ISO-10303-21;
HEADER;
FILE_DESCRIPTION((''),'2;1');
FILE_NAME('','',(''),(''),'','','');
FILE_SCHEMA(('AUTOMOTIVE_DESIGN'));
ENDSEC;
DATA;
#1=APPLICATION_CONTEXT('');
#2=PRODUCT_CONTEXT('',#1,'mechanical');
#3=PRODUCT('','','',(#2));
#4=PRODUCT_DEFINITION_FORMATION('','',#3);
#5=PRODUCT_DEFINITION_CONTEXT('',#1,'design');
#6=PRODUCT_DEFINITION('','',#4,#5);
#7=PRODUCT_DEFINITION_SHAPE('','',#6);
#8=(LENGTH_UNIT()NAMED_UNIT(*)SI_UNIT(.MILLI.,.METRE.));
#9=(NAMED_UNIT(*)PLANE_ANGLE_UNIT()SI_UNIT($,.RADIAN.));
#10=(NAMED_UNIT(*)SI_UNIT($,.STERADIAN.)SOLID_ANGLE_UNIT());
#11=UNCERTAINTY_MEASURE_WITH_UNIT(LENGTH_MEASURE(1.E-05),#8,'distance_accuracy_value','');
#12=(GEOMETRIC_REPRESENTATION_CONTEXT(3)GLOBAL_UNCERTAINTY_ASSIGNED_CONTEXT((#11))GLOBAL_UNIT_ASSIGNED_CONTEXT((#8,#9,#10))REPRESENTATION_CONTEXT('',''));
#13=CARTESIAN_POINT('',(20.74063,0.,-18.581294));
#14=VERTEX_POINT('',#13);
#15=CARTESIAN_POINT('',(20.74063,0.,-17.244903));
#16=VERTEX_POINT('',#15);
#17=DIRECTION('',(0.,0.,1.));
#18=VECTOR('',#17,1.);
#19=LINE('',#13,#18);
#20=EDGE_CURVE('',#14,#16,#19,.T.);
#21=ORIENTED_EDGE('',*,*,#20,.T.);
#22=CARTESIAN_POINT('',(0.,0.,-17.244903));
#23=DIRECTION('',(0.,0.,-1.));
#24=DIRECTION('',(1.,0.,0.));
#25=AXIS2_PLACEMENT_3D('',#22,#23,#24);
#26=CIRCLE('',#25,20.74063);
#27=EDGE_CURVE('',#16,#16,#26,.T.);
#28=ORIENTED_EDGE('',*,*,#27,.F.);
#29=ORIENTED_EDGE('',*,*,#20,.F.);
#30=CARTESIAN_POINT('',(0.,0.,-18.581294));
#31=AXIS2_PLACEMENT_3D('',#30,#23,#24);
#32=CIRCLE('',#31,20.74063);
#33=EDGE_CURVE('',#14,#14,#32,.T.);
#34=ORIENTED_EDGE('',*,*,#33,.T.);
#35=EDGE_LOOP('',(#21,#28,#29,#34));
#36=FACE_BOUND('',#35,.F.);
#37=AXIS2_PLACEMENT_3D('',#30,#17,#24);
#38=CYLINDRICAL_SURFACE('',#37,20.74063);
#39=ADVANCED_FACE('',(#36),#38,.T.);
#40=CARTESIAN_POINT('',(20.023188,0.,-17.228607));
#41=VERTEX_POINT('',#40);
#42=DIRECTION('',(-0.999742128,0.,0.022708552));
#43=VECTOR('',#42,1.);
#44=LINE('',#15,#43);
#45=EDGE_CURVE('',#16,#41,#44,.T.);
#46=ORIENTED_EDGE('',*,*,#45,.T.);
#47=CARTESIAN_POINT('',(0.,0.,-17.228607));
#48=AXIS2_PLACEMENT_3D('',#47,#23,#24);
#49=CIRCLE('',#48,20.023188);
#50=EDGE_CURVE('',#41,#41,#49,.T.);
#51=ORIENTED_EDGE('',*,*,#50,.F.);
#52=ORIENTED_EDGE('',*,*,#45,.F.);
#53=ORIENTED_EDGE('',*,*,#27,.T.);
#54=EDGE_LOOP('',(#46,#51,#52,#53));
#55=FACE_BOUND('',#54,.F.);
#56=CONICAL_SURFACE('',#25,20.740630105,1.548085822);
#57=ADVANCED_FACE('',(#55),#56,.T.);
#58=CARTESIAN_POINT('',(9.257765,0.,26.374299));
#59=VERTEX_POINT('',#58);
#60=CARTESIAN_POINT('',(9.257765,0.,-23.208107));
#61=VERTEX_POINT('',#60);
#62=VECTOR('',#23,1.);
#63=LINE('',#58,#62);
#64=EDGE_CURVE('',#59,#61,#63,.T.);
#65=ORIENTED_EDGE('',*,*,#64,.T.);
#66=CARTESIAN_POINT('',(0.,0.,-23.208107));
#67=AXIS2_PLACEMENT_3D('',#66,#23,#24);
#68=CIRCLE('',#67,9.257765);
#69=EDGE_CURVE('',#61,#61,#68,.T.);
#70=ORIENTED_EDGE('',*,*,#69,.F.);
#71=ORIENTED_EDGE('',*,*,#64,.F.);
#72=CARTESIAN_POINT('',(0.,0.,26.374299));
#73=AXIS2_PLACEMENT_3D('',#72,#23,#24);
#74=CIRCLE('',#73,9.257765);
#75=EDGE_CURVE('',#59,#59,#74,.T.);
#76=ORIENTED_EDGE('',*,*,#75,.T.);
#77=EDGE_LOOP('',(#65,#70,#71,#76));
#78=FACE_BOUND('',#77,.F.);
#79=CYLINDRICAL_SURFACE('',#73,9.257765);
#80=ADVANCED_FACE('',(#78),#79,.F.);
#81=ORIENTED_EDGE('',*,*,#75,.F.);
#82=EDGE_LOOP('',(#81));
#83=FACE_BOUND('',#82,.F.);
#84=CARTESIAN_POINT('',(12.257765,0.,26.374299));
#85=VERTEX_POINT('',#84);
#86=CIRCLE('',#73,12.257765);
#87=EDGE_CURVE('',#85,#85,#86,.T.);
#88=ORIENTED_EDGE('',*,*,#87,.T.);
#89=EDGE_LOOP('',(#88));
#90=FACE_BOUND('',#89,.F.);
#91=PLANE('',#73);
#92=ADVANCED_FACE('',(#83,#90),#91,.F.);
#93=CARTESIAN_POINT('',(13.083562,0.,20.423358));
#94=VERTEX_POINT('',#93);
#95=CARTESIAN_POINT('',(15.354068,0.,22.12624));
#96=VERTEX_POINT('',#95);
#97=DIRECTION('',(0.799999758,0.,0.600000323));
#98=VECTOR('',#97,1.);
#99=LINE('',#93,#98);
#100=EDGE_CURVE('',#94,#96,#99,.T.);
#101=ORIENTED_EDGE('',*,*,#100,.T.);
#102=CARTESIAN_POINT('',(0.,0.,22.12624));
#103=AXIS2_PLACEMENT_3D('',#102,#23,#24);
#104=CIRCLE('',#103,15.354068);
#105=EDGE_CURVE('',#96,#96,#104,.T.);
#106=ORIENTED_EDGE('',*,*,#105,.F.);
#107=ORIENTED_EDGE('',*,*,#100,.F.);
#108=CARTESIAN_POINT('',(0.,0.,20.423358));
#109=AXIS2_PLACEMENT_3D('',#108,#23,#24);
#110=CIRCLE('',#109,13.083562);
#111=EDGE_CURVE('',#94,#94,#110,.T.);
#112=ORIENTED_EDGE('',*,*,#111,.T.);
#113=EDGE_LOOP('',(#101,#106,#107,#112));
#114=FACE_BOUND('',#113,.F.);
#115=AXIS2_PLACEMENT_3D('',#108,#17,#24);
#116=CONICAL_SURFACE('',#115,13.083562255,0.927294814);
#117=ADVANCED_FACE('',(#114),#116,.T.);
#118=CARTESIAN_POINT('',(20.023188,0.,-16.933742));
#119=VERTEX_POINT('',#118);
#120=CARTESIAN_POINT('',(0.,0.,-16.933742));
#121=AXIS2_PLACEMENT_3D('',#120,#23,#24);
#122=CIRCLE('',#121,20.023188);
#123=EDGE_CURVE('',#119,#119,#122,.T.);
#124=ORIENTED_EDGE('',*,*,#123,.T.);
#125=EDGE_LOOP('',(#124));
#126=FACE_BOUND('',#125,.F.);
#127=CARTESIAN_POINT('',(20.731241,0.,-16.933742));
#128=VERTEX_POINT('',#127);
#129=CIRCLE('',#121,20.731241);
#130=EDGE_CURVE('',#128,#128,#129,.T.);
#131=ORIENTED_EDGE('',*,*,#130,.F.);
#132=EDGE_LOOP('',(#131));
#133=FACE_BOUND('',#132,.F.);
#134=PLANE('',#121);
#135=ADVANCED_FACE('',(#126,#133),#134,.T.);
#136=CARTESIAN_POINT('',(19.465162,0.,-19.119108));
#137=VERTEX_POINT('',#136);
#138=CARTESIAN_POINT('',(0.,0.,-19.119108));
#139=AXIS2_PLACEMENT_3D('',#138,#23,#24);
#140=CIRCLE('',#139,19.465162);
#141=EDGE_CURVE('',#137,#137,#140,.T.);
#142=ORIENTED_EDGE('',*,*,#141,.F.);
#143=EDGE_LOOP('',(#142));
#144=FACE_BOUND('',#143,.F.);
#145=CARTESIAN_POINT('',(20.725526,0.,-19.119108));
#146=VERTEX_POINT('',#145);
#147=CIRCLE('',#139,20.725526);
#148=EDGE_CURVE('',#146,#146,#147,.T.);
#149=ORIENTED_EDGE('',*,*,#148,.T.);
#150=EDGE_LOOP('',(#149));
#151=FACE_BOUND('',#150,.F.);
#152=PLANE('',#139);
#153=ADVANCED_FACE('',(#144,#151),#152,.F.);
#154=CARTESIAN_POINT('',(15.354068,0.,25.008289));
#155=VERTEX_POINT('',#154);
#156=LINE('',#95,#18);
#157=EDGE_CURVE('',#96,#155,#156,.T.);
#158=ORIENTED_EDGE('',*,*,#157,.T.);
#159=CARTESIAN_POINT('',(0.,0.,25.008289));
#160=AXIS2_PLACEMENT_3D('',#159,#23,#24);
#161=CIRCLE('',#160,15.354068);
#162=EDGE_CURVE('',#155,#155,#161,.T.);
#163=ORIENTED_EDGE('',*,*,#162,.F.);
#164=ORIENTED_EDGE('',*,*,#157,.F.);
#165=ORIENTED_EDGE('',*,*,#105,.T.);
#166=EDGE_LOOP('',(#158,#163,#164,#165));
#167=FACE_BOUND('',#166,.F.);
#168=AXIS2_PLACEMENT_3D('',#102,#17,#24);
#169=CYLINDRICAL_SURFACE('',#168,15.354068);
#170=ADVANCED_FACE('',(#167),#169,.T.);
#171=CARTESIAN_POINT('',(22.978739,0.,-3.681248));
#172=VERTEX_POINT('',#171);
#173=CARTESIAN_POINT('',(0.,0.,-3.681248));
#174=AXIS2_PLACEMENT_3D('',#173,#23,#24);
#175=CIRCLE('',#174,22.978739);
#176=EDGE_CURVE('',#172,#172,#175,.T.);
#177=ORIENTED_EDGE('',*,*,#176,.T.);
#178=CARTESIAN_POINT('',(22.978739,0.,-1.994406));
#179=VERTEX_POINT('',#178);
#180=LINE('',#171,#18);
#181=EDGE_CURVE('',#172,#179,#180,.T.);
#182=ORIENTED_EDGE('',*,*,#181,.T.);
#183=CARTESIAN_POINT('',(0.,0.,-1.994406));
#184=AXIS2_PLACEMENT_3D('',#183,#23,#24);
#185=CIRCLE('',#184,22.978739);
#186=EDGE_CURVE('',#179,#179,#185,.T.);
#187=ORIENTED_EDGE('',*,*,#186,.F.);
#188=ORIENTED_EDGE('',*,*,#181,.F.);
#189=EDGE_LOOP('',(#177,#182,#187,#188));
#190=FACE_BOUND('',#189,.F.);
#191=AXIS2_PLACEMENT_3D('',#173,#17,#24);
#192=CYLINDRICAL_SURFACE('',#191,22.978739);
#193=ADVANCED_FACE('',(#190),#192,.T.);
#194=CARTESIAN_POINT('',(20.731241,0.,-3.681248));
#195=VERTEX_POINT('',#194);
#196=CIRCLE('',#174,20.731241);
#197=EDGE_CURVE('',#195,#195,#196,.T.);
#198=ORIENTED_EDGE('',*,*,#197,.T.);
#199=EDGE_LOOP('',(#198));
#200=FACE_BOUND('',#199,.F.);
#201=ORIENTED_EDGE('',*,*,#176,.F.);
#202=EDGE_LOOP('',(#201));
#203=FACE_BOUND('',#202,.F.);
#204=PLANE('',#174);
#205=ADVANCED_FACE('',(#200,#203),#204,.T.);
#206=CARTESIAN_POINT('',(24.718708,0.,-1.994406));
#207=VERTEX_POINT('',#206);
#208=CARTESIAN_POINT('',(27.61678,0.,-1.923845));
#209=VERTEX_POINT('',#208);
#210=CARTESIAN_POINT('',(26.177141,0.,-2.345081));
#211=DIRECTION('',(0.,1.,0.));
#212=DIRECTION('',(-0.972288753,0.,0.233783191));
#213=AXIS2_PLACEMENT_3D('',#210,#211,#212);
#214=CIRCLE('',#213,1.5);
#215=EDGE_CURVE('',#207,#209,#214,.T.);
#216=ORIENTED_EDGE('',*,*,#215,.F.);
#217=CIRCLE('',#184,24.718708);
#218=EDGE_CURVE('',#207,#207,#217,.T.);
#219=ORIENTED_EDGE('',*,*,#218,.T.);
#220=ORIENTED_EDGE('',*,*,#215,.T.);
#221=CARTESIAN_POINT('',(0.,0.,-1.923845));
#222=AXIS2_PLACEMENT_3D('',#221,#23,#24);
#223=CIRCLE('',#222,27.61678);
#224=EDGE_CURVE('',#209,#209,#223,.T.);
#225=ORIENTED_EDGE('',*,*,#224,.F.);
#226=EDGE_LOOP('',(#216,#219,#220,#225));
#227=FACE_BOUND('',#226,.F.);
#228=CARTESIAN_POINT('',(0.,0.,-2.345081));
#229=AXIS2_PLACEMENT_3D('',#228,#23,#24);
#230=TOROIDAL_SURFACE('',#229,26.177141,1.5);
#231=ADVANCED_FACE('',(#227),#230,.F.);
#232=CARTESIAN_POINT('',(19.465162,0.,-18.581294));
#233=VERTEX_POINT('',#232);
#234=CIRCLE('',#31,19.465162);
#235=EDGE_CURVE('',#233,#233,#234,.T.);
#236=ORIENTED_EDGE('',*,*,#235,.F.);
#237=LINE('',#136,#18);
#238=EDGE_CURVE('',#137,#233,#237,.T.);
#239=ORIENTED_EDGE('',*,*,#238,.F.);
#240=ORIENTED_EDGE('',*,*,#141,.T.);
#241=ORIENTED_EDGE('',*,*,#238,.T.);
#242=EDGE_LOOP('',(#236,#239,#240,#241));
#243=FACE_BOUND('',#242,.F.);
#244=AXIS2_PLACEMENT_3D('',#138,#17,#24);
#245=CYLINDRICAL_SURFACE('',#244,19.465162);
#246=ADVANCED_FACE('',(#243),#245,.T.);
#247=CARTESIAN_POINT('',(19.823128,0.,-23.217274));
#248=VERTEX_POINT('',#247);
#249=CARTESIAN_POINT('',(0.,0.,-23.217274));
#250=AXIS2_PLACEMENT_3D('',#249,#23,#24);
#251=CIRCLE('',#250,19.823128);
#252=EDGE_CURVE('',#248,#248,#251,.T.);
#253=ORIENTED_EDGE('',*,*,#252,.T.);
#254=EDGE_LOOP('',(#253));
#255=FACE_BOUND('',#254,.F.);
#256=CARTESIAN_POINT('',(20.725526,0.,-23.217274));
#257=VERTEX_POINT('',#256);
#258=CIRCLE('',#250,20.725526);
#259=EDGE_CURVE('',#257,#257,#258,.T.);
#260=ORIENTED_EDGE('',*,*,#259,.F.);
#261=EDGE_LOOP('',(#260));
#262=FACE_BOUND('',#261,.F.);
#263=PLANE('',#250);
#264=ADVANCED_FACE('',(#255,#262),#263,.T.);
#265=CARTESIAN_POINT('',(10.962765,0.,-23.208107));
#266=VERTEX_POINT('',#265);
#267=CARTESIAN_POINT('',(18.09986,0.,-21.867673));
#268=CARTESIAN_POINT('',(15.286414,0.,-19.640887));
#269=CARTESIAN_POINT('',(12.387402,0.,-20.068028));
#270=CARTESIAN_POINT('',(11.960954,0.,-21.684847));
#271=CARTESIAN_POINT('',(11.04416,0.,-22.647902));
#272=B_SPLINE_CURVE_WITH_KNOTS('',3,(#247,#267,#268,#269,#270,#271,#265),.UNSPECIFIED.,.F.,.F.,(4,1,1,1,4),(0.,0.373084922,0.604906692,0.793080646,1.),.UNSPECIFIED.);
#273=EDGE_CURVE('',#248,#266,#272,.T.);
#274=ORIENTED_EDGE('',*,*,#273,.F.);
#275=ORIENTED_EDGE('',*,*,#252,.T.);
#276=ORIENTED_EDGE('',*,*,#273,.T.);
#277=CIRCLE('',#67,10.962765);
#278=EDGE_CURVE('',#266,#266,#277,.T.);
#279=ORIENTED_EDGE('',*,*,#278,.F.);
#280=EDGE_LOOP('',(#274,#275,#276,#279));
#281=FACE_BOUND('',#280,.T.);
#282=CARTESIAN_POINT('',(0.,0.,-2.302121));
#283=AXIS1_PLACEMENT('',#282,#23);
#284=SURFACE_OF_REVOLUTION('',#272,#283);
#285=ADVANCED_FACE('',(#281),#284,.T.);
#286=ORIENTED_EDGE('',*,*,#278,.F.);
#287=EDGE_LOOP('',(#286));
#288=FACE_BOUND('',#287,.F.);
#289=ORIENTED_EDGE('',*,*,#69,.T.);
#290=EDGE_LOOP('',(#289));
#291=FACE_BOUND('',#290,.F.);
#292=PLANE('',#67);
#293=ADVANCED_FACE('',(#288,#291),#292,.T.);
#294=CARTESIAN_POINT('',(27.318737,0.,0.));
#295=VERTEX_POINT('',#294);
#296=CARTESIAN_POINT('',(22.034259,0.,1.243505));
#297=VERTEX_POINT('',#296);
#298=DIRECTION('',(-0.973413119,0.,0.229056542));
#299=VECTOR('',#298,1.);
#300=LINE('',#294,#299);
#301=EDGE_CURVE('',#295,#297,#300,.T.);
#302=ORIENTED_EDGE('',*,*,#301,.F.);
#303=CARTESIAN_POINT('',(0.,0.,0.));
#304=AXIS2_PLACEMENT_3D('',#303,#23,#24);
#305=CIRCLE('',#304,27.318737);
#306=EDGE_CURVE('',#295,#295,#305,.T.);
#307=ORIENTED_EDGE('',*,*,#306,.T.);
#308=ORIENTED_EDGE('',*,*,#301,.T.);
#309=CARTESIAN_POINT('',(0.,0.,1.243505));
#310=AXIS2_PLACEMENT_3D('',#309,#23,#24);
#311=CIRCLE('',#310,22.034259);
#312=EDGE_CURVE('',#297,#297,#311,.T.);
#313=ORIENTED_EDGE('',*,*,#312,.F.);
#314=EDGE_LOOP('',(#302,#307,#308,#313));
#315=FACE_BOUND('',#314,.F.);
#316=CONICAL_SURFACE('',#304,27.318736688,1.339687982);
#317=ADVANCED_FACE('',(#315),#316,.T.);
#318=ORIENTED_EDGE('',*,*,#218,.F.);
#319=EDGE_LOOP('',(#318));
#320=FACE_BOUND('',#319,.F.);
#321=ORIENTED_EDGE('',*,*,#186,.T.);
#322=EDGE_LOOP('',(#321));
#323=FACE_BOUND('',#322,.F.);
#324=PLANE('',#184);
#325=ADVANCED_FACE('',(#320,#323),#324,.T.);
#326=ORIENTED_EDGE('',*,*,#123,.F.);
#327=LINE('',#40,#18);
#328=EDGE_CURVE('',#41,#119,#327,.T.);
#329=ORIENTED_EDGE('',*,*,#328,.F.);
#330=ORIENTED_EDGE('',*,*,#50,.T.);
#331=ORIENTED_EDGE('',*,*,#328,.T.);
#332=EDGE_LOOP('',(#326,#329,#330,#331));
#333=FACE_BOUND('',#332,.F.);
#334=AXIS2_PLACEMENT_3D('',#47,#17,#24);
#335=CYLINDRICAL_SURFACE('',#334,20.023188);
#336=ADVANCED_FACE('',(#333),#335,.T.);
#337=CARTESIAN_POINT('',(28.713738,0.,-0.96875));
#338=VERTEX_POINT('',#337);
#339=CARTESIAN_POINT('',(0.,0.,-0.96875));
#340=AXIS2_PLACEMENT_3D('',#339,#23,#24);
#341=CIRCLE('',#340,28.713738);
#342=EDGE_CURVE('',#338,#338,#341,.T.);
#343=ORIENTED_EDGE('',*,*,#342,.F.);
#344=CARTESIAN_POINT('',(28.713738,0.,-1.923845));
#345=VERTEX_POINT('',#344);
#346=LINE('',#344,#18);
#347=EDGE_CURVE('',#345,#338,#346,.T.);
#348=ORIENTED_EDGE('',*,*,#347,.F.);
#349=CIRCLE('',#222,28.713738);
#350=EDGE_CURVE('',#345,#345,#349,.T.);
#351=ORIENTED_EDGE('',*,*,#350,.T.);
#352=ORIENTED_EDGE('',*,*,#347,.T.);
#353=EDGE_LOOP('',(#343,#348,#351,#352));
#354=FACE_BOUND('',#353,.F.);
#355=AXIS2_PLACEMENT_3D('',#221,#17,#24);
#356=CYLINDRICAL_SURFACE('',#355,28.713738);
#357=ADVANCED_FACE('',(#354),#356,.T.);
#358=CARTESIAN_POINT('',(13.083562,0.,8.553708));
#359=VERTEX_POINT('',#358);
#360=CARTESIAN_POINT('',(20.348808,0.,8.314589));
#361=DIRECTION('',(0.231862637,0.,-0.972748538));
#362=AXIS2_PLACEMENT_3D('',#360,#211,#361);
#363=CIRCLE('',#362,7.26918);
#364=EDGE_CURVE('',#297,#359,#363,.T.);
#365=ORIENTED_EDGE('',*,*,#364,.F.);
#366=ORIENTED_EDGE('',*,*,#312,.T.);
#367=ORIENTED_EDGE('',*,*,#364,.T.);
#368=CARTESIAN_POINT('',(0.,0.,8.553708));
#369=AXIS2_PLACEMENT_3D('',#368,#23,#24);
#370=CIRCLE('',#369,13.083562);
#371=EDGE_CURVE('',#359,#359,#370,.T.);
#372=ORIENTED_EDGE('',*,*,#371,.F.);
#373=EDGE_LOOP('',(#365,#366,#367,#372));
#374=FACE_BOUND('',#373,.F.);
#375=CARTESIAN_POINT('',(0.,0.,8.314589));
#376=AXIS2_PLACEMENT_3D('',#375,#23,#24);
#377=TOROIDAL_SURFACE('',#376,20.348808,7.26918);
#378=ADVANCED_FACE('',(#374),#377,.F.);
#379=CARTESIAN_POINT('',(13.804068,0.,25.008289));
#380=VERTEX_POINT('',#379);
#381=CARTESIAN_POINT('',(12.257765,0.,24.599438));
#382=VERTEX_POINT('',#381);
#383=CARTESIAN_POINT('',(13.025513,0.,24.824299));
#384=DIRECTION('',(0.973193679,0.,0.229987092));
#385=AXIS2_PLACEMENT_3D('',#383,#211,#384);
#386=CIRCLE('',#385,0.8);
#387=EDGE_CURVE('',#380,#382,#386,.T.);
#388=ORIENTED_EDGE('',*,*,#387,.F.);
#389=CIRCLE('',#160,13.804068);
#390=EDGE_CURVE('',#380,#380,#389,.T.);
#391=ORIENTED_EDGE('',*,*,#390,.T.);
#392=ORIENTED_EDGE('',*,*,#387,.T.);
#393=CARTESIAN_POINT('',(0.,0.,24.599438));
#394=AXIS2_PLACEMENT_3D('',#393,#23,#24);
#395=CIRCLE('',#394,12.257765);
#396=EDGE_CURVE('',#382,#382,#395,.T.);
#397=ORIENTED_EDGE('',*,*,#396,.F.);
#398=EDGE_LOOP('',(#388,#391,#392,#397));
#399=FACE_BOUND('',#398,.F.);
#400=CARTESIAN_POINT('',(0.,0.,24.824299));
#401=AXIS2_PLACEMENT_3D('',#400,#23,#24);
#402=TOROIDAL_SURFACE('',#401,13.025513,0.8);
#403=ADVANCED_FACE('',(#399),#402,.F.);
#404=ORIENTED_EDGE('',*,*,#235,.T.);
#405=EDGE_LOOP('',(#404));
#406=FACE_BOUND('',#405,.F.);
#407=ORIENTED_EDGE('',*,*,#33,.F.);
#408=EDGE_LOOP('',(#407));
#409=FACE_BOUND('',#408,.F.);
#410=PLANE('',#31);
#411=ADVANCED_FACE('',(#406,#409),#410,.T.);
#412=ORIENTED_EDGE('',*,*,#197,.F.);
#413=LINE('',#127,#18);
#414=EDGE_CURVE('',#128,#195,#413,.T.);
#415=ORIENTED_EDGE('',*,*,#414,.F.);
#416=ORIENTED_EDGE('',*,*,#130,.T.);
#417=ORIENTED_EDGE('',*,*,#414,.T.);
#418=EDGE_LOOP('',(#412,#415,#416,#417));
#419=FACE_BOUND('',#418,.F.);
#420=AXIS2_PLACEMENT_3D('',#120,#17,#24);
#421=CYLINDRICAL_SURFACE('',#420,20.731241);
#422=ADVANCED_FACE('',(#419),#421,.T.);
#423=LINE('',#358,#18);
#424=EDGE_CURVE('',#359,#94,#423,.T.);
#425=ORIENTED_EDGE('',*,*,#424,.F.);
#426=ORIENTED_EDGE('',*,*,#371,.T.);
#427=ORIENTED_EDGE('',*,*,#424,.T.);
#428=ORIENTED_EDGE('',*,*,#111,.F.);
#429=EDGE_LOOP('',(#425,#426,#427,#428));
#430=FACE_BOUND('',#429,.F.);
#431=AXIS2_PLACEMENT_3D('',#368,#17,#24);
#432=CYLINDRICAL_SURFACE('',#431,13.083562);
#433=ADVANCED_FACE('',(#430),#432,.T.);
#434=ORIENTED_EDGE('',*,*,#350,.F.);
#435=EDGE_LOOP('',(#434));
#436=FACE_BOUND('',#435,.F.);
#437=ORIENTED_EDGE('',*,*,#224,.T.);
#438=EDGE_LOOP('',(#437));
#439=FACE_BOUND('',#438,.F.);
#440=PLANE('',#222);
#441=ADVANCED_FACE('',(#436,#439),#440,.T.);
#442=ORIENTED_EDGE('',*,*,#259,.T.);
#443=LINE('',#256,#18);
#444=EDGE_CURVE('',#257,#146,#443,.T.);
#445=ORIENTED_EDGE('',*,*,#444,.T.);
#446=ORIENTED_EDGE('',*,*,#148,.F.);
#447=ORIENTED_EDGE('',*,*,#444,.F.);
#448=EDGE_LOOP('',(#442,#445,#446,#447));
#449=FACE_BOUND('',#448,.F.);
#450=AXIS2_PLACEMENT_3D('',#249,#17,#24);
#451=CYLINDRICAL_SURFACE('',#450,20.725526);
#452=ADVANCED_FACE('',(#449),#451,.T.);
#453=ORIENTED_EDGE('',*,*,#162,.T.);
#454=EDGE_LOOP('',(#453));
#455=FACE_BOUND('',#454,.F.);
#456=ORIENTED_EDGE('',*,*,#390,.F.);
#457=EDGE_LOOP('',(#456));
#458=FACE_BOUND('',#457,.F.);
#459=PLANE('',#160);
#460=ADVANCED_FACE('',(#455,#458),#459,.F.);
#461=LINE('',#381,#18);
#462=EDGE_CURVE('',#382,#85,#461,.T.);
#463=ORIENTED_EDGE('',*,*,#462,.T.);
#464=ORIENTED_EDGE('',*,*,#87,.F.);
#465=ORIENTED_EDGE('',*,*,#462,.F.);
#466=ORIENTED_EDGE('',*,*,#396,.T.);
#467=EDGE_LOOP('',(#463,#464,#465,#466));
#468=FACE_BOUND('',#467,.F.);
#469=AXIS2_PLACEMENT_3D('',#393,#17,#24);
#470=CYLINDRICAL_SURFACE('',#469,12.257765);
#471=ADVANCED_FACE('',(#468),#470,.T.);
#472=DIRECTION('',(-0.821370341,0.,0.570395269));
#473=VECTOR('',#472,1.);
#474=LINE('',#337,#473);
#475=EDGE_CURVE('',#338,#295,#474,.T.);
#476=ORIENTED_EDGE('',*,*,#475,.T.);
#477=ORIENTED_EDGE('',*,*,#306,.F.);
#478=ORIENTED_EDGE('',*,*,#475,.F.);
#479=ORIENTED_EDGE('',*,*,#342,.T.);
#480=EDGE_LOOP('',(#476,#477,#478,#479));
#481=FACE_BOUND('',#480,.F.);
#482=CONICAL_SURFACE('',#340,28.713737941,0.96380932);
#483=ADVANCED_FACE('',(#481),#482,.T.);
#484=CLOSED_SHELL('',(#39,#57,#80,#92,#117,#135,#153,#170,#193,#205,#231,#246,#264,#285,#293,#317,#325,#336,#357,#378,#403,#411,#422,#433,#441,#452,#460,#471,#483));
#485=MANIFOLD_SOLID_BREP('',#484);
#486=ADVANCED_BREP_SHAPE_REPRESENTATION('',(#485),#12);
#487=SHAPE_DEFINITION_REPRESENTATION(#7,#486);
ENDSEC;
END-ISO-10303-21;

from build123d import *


with BuildPart() as f1:
    # F0 (on Front) → F1 (revolve)
    with BuildSketch(Plane.XZ):
        with BuildLine():
            Line((12.2577650473, 26.3742990792), (9.2577650473, 26.3742990792))
            Line((9.2577650473, 26.3742990792), (9.2577650473, -23.2081070539))
            Line((9.2577650473, -23.2081070539), (10.9627645774, -23.2081070539))
            add(Edge.make_bspline(
                [(19.8231283575, -23.2172738761), (18.0998597904, -21.8676731785), (15.286414199, -19.6408866692), (12.3874015782, -20.0680284116), (11.9609542206, -21.6848471621), (11.0441603331, -22.6479024969), (10.9627645774, -23.2081070539)],
                knots=[0, 0, 0, 0, 0.3730849217, 0.6049066924, 0.7930806457, 1, 1, 1, 1], degree=3))
            Line((19.8231283575, -23.2172738761), (20.7255259156, -23.2172738761))
            Line((20.7255259156, -23.2172738761), (20.7255259156, -19.1191080958))
            Line((20.7255259156, -19.1191080958), (19.4651619299, -19.1191080958))
            Line((19.4651619299, -19.1191080958), (19.4651619299, -18.5812935233))
            Line((19.4651619299, -18.5812935233), (20.7406301051, -18.5812935233))
            Line((20.7406301051, -18.5812935233), (20.7406301051, -17.2449033707))
            Line((20.7406301051, -17.2449033707), (20.0231876224, -17.2286070883))
            Line((20.0231876224, -17.2286070883), (20.0231876224, -16.9337423263))
            Line((20.0231876224, -16.9337423263), (20.7312413867, -16.9337423263))
            Line((20.7312413867, -16.9337423263), (20.7312413867, -3.6812480424))
            Line((20.7312413867, -3.6812480424), (22.978738881, -3.6812480424))
            Line((22.978738881, -3.6812480424), (22.978738881, -1.994405834))
            Line((22.978738881, -1.994405834), (24.7187081645, -1.994405834))
            ThreePointArc((24.7187081645, -1.994405834), (26.1406309916, -0.8455250202), (27.6167804076, -1.923845266))
            Line((27.6167804076, -1.923845266), (28.7137379414, -1.923845266))
            Line((28.7137379414, -1.923845266), (28.7137379414, -0.9687495106))
            Line((28.7137379414, -0.9687495106), (27.3187366885, 0))
            Line((27.3187366885, 0), (22.0342594068, 1.2435050098))
            ThreePointArc((22.0342594068, 1.2435050098), (15.7506244054, 2.6845196535), (13.0835622549, 8.5537079722))
            Line((13.0835622549, 8.5537079722), (13.0835622549, 20.4233584418))
            Line((13.0835622549, 20.4233584418), (15.3540684308, 22.1262395074))
            Line((15.3540684308, 22.1262395074), (15.3540684308, 25.0082887529))
            Line((15.3540684308, 25.0082887529), (13.8040684308, 25.0082887529))
            ThreePointArc((13.8040684308, 25.0082887529), (13.2300100677, 24.0508773646), (12.2577650473, 24.5994383828))
            Line((12.2577650473, 24.5994383828), (12.2577650473, 26.3742990792))
        make_face()
    revolve(axis=Axis((0, 0, -2.302121371), (0, 0, -1)))


solid = f1.part
